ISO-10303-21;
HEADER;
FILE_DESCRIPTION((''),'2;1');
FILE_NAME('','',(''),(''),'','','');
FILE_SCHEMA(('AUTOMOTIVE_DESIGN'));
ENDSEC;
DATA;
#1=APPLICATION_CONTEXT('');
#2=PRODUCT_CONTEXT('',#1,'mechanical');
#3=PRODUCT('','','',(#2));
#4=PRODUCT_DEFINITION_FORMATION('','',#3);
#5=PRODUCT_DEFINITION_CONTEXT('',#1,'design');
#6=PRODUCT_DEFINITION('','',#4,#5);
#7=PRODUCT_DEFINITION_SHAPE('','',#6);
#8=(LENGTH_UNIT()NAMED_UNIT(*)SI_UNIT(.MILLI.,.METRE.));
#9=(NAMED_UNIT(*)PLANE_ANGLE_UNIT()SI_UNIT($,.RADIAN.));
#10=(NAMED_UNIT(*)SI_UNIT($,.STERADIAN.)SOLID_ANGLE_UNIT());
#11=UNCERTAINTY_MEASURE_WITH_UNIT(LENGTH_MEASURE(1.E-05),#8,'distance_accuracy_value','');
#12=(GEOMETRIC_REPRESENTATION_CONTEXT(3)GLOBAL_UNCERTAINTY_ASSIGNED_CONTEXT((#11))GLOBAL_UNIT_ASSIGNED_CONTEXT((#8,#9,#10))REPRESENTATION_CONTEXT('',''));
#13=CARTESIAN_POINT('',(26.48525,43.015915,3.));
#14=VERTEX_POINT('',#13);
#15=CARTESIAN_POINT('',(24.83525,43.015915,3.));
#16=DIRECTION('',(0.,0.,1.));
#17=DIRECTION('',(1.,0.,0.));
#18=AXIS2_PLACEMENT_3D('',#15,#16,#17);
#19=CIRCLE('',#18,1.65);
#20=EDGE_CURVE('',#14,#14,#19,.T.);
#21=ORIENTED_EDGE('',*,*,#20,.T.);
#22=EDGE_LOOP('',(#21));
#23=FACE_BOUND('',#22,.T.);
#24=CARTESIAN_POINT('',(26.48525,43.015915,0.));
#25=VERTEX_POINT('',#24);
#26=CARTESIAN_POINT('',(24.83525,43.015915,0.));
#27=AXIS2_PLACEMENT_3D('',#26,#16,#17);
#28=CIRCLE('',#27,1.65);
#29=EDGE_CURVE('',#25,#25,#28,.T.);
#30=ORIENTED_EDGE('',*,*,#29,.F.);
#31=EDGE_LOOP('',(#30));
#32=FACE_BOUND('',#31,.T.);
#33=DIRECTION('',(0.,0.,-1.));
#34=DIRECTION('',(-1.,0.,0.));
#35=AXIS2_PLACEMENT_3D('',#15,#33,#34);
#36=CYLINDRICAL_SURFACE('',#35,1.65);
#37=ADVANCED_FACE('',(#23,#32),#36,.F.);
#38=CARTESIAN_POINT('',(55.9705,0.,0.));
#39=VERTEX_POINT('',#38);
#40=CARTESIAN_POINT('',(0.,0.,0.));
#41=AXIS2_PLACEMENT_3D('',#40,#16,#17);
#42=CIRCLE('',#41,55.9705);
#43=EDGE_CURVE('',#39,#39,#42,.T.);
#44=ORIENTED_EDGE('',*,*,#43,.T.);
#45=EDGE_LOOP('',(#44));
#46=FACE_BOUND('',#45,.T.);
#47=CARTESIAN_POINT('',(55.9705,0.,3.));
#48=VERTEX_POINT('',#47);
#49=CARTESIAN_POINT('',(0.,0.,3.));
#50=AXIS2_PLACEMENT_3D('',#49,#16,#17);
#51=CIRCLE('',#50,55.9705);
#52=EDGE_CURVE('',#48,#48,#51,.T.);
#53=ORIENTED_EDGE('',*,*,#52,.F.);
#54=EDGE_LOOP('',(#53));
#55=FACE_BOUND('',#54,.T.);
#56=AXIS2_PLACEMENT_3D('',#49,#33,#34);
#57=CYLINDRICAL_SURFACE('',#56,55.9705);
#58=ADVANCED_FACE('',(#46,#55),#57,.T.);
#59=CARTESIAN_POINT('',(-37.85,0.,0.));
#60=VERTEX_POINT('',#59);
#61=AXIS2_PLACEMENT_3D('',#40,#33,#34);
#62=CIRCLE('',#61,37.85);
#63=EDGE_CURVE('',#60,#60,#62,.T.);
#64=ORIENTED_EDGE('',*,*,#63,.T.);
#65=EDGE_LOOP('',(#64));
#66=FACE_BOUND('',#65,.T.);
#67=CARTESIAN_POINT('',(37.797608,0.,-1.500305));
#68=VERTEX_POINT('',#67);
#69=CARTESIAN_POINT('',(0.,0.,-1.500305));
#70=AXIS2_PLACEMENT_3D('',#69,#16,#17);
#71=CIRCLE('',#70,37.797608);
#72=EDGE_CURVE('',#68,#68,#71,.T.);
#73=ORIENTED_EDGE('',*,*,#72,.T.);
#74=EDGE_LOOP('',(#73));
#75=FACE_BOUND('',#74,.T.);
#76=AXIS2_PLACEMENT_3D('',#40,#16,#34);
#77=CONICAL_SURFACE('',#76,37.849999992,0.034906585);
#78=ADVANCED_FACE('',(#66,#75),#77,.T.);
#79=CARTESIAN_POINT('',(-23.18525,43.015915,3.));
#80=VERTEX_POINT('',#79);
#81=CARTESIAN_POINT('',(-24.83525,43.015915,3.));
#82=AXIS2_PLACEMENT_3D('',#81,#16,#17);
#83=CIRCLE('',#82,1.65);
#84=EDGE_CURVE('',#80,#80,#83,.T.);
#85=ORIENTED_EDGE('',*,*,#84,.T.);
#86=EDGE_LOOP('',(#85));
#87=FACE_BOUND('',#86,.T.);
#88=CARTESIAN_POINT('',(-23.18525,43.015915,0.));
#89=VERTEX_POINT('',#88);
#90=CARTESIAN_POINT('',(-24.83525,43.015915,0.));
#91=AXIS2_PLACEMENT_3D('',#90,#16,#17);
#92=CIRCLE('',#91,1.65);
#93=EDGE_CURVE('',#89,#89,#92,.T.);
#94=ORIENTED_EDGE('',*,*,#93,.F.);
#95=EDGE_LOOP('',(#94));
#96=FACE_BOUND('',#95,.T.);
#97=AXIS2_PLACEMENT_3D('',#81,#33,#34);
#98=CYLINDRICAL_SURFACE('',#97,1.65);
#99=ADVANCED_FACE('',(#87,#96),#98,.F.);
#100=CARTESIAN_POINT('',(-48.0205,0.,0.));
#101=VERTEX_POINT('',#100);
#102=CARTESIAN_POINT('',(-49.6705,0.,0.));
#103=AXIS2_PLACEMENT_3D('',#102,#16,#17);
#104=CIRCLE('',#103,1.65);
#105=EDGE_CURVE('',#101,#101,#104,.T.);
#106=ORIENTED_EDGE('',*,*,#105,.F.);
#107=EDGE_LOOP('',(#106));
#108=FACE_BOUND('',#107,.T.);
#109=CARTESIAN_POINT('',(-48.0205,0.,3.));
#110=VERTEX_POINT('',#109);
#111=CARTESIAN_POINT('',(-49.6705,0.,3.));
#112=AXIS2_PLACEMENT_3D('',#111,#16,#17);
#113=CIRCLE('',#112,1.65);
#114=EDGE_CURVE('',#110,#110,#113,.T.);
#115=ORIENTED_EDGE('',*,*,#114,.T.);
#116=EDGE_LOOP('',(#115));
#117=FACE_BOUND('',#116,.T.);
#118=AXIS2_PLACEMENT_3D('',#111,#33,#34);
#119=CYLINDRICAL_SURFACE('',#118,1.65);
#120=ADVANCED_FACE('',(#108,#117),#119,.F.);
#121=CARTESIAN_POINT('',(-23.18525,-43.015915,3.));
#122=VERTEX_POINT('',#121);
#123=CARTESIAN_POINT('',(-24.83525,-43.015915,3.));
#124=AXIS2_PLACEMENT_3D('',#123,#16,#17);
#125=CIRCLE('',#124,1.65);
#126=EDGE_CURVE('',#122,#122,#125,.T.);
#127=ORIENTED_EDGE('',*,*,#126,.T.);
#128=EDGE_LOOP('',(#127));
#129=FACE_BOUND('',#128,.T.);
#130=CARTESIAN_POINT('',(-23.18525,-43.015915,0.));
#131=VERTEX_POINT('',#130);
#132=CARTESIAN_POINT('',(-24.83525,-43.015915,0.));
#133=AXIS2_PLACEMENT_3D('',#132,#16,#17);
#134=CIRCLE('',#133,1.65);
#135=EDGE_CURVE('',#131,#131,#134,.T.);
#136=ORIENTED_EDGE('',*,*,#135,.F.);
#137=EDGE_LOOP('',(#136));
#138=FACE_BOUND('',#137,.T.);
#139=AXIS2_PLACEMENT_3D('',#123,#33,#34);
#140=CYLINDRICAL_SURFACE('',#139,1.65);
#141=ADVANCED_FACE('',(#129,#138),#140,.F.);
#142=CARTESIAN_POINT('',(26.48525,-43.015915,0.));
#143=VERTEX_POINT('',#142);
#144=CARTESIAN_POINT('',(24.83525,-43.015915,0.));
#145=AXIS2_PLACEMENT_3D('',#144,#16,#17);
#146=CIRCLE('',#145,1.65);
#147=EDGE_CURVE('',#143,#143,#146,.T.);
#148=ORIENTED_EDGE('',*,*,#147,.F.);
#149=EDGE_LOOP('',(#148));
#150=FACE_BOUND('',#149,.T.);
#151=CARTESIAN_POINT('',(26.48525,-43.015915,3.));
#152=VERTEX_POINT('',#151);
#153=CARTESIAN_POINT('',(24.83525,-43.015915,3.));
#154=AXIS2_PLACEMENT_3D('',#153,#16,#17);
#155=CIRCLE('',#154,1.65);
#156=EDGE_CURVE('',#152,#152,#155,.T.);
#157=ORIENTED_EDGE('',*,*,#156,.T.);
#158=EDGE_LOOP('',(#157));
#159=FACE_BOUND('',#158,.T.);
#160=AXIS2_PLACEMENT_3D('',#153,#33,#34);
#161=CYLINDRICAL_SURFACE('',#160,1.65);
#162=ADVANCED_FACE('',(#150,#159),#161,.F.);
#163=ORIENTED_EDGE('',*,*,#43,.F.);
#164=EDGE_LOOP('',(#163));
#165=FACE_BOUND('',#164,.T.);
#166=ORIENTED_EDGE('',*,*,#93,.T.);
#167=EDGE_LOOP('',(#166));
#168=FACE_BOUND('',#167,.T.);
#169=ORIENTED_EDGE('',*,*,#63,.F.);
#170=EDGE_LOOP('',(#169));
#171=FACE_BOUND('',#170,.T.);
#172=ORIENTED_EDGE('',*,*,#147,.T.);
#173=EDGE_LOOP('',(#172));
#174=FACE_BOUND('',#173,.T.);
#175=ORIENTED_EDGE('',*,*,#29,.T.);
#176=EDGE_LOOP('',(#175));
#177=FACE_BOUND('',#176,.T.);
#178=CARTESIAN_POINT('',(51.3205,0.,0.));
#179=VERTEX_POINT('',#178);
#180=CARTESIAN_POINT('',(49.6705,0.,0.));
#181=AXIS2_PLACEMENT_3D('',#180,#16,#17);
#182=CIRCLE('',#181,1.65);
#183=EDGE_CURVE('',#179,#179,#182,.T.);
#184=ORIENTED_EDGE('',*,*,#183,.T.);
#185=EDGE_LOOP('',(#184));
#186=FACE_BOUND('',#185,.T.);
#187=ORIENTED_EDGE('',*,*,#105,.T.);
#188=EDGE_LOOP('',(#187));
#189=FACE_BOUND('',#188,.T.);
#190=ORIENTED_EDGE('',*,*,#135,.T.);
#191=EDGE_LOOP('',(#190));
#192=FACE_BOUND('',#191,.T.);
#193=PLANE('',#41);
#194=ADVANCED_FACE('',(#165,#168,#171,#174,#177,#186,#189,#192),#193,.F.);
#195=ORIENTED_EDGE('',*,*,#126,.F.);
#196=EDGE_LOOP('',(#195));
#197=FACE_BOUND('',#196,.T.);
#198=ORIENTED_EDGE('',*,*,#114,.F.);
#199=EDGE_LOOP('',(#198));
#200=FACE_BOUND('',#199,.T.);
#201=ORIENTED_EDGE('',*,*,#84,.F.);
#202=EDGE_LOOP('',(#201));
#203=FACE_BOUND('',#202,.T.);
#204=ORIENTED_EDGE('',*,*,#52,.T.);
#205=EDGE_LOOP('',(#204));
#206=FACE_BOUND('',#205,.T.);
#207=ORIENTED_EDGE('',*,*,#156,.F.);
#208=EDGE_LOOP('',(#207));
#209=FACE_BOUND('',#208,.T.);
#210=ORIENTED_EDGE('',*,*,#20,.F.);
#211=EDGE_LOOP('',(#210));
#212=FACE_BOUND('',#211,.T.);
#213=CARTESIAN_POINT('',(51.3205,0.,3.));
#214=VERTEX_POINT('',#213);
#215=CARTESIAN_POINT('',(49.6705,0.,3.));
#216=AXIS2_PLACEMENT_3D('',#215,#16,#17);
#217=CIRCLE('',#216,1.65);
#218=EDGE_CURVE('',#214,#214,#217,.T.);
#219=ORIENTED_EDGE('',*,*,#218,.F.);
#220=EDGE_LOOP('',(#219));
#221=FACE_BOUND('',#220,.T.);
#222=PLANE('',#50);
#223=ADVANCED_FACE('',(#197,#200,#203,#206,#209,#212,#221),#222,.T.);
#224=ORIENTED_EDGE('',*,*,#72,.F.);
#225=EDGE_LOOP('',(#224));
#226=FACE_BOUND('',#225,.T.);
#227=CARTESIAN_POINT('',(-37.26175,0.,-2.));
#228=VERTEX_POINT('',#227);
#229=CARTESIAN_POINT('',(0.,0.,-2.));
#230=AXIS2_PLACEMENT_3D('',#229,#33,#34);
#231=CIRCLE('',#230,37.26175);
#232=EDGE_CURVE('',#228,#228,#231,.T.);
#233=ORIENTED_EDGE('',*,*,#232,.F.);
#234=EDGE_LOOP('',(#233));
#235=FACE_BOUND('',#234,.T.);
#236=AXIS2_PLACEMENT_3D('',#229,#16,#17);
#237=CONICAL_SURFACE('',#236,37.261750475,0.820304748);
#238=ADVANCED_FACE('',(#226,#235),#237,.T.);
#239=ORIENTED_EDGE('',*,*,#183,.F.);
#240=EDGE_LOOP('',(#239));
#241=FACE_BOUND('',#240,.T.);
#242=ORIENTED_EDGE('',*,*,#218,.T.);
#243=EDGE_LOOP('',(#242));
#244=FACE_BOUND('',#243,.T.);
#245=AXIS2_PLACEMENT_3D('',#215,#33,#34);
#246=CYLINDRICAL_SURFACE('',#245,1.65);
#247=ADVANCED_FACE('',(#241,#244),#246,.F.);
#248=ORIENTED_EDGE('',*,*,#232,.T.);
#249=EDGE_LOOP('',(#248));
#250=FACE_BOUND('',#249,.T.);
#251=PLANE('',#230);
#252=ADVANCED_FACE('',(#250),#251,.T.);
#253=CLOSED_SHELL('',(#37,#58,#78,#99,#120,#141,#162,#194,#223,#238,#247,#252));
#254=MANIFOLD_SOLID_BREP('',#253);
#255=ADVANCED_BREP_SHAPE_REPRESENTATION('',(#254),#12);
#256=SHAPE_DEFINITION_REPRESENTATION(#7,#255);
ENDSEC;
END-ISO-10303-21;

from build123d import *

# Parameters (mm, degrees)
SKETCH1_R           = 55.9705
SKETCH1_R_2         = 1.65
BOSS_EXTRUDE1_DEPTH = 3
SKETCH3_R           = 37.849999992
BOSS_EXTRUDE2_DEPTH = 2
BOSS_EXTRUDE2_TAPER = 2
CHAMFER1_SIZE       = 0.5
CHAMFER1_SIZE_2     = 0.518407978


with BuildPart() as part:
    # Sketch1 → Boss-Extrude1 (new body)
    with BuildSketch(Plane.XY):
        Circle(SKETCH1_R)
        with Locations((49.6705, 0)):
            Circle(SKETCH1_R_2, mode=Mode.SUBTRACT)
        with Locations((24.83525, 43.015914819)):
            Circle(SKETCH1_R_2, mode=Mode.SUBTRACT)
        with Locations((-24.83525, 43.015914819)):
            Circle(SKETCH1_R_2, mode=Mode.SUBTRACT)
        with Locations((-49.6705, 0)):
            Circle(SKETCH1_R_2, mode=Mode.SUBTRACT)
        with Locations((-24.83525, -43.015914819)):
            Circle(SKETCH1_R_2, mode=Mode.SUBTRACT)
        with Locations((24.83525, -43.015914819)):
            Circle(SKETCH1_R_2, mode=Mode.SUBTRACT)
    extrude(amount=BOSS_EXTRUDE1_DEPTH)

    # Sketch3 → Boss-Extrude2 (add)
    with BuildSketch(Plane(origin=(0, 0, 0), x_dir=(-1, 0, 0), z_dir=(0, 0, -1))):
        Circle(SKETCH3_R)
    extrude(amount=BOSS_EXTRUDE2_DEPTH, taper=BOSS_EXTRUDE2_TAPER)

    # Chamfer1
    # the kernel refuses this chamfer: 0.518407978, 0.5 mm, written as the material it takes off along each edge
    with BuildSketch(Plane(origin=(0, 0, -2), x_dir=(-1, 0, 0), z_dir=(0, 1, 0))) as chamfer1_piece_1:
        Polygon((37.780158453 + CHAMFER1_SIZE * 0.0348994967025, CHAMFER1_SIZE * 0.999390827019), (37.780158453 - CHAMFER1_SIZE_2, 0), (37.780158453, 0), align=None)
    revolve(axis=Axis((0, 0, -2), (0, 0, 1)), mode=Mode.SUBTRACT)


solid = part.part
